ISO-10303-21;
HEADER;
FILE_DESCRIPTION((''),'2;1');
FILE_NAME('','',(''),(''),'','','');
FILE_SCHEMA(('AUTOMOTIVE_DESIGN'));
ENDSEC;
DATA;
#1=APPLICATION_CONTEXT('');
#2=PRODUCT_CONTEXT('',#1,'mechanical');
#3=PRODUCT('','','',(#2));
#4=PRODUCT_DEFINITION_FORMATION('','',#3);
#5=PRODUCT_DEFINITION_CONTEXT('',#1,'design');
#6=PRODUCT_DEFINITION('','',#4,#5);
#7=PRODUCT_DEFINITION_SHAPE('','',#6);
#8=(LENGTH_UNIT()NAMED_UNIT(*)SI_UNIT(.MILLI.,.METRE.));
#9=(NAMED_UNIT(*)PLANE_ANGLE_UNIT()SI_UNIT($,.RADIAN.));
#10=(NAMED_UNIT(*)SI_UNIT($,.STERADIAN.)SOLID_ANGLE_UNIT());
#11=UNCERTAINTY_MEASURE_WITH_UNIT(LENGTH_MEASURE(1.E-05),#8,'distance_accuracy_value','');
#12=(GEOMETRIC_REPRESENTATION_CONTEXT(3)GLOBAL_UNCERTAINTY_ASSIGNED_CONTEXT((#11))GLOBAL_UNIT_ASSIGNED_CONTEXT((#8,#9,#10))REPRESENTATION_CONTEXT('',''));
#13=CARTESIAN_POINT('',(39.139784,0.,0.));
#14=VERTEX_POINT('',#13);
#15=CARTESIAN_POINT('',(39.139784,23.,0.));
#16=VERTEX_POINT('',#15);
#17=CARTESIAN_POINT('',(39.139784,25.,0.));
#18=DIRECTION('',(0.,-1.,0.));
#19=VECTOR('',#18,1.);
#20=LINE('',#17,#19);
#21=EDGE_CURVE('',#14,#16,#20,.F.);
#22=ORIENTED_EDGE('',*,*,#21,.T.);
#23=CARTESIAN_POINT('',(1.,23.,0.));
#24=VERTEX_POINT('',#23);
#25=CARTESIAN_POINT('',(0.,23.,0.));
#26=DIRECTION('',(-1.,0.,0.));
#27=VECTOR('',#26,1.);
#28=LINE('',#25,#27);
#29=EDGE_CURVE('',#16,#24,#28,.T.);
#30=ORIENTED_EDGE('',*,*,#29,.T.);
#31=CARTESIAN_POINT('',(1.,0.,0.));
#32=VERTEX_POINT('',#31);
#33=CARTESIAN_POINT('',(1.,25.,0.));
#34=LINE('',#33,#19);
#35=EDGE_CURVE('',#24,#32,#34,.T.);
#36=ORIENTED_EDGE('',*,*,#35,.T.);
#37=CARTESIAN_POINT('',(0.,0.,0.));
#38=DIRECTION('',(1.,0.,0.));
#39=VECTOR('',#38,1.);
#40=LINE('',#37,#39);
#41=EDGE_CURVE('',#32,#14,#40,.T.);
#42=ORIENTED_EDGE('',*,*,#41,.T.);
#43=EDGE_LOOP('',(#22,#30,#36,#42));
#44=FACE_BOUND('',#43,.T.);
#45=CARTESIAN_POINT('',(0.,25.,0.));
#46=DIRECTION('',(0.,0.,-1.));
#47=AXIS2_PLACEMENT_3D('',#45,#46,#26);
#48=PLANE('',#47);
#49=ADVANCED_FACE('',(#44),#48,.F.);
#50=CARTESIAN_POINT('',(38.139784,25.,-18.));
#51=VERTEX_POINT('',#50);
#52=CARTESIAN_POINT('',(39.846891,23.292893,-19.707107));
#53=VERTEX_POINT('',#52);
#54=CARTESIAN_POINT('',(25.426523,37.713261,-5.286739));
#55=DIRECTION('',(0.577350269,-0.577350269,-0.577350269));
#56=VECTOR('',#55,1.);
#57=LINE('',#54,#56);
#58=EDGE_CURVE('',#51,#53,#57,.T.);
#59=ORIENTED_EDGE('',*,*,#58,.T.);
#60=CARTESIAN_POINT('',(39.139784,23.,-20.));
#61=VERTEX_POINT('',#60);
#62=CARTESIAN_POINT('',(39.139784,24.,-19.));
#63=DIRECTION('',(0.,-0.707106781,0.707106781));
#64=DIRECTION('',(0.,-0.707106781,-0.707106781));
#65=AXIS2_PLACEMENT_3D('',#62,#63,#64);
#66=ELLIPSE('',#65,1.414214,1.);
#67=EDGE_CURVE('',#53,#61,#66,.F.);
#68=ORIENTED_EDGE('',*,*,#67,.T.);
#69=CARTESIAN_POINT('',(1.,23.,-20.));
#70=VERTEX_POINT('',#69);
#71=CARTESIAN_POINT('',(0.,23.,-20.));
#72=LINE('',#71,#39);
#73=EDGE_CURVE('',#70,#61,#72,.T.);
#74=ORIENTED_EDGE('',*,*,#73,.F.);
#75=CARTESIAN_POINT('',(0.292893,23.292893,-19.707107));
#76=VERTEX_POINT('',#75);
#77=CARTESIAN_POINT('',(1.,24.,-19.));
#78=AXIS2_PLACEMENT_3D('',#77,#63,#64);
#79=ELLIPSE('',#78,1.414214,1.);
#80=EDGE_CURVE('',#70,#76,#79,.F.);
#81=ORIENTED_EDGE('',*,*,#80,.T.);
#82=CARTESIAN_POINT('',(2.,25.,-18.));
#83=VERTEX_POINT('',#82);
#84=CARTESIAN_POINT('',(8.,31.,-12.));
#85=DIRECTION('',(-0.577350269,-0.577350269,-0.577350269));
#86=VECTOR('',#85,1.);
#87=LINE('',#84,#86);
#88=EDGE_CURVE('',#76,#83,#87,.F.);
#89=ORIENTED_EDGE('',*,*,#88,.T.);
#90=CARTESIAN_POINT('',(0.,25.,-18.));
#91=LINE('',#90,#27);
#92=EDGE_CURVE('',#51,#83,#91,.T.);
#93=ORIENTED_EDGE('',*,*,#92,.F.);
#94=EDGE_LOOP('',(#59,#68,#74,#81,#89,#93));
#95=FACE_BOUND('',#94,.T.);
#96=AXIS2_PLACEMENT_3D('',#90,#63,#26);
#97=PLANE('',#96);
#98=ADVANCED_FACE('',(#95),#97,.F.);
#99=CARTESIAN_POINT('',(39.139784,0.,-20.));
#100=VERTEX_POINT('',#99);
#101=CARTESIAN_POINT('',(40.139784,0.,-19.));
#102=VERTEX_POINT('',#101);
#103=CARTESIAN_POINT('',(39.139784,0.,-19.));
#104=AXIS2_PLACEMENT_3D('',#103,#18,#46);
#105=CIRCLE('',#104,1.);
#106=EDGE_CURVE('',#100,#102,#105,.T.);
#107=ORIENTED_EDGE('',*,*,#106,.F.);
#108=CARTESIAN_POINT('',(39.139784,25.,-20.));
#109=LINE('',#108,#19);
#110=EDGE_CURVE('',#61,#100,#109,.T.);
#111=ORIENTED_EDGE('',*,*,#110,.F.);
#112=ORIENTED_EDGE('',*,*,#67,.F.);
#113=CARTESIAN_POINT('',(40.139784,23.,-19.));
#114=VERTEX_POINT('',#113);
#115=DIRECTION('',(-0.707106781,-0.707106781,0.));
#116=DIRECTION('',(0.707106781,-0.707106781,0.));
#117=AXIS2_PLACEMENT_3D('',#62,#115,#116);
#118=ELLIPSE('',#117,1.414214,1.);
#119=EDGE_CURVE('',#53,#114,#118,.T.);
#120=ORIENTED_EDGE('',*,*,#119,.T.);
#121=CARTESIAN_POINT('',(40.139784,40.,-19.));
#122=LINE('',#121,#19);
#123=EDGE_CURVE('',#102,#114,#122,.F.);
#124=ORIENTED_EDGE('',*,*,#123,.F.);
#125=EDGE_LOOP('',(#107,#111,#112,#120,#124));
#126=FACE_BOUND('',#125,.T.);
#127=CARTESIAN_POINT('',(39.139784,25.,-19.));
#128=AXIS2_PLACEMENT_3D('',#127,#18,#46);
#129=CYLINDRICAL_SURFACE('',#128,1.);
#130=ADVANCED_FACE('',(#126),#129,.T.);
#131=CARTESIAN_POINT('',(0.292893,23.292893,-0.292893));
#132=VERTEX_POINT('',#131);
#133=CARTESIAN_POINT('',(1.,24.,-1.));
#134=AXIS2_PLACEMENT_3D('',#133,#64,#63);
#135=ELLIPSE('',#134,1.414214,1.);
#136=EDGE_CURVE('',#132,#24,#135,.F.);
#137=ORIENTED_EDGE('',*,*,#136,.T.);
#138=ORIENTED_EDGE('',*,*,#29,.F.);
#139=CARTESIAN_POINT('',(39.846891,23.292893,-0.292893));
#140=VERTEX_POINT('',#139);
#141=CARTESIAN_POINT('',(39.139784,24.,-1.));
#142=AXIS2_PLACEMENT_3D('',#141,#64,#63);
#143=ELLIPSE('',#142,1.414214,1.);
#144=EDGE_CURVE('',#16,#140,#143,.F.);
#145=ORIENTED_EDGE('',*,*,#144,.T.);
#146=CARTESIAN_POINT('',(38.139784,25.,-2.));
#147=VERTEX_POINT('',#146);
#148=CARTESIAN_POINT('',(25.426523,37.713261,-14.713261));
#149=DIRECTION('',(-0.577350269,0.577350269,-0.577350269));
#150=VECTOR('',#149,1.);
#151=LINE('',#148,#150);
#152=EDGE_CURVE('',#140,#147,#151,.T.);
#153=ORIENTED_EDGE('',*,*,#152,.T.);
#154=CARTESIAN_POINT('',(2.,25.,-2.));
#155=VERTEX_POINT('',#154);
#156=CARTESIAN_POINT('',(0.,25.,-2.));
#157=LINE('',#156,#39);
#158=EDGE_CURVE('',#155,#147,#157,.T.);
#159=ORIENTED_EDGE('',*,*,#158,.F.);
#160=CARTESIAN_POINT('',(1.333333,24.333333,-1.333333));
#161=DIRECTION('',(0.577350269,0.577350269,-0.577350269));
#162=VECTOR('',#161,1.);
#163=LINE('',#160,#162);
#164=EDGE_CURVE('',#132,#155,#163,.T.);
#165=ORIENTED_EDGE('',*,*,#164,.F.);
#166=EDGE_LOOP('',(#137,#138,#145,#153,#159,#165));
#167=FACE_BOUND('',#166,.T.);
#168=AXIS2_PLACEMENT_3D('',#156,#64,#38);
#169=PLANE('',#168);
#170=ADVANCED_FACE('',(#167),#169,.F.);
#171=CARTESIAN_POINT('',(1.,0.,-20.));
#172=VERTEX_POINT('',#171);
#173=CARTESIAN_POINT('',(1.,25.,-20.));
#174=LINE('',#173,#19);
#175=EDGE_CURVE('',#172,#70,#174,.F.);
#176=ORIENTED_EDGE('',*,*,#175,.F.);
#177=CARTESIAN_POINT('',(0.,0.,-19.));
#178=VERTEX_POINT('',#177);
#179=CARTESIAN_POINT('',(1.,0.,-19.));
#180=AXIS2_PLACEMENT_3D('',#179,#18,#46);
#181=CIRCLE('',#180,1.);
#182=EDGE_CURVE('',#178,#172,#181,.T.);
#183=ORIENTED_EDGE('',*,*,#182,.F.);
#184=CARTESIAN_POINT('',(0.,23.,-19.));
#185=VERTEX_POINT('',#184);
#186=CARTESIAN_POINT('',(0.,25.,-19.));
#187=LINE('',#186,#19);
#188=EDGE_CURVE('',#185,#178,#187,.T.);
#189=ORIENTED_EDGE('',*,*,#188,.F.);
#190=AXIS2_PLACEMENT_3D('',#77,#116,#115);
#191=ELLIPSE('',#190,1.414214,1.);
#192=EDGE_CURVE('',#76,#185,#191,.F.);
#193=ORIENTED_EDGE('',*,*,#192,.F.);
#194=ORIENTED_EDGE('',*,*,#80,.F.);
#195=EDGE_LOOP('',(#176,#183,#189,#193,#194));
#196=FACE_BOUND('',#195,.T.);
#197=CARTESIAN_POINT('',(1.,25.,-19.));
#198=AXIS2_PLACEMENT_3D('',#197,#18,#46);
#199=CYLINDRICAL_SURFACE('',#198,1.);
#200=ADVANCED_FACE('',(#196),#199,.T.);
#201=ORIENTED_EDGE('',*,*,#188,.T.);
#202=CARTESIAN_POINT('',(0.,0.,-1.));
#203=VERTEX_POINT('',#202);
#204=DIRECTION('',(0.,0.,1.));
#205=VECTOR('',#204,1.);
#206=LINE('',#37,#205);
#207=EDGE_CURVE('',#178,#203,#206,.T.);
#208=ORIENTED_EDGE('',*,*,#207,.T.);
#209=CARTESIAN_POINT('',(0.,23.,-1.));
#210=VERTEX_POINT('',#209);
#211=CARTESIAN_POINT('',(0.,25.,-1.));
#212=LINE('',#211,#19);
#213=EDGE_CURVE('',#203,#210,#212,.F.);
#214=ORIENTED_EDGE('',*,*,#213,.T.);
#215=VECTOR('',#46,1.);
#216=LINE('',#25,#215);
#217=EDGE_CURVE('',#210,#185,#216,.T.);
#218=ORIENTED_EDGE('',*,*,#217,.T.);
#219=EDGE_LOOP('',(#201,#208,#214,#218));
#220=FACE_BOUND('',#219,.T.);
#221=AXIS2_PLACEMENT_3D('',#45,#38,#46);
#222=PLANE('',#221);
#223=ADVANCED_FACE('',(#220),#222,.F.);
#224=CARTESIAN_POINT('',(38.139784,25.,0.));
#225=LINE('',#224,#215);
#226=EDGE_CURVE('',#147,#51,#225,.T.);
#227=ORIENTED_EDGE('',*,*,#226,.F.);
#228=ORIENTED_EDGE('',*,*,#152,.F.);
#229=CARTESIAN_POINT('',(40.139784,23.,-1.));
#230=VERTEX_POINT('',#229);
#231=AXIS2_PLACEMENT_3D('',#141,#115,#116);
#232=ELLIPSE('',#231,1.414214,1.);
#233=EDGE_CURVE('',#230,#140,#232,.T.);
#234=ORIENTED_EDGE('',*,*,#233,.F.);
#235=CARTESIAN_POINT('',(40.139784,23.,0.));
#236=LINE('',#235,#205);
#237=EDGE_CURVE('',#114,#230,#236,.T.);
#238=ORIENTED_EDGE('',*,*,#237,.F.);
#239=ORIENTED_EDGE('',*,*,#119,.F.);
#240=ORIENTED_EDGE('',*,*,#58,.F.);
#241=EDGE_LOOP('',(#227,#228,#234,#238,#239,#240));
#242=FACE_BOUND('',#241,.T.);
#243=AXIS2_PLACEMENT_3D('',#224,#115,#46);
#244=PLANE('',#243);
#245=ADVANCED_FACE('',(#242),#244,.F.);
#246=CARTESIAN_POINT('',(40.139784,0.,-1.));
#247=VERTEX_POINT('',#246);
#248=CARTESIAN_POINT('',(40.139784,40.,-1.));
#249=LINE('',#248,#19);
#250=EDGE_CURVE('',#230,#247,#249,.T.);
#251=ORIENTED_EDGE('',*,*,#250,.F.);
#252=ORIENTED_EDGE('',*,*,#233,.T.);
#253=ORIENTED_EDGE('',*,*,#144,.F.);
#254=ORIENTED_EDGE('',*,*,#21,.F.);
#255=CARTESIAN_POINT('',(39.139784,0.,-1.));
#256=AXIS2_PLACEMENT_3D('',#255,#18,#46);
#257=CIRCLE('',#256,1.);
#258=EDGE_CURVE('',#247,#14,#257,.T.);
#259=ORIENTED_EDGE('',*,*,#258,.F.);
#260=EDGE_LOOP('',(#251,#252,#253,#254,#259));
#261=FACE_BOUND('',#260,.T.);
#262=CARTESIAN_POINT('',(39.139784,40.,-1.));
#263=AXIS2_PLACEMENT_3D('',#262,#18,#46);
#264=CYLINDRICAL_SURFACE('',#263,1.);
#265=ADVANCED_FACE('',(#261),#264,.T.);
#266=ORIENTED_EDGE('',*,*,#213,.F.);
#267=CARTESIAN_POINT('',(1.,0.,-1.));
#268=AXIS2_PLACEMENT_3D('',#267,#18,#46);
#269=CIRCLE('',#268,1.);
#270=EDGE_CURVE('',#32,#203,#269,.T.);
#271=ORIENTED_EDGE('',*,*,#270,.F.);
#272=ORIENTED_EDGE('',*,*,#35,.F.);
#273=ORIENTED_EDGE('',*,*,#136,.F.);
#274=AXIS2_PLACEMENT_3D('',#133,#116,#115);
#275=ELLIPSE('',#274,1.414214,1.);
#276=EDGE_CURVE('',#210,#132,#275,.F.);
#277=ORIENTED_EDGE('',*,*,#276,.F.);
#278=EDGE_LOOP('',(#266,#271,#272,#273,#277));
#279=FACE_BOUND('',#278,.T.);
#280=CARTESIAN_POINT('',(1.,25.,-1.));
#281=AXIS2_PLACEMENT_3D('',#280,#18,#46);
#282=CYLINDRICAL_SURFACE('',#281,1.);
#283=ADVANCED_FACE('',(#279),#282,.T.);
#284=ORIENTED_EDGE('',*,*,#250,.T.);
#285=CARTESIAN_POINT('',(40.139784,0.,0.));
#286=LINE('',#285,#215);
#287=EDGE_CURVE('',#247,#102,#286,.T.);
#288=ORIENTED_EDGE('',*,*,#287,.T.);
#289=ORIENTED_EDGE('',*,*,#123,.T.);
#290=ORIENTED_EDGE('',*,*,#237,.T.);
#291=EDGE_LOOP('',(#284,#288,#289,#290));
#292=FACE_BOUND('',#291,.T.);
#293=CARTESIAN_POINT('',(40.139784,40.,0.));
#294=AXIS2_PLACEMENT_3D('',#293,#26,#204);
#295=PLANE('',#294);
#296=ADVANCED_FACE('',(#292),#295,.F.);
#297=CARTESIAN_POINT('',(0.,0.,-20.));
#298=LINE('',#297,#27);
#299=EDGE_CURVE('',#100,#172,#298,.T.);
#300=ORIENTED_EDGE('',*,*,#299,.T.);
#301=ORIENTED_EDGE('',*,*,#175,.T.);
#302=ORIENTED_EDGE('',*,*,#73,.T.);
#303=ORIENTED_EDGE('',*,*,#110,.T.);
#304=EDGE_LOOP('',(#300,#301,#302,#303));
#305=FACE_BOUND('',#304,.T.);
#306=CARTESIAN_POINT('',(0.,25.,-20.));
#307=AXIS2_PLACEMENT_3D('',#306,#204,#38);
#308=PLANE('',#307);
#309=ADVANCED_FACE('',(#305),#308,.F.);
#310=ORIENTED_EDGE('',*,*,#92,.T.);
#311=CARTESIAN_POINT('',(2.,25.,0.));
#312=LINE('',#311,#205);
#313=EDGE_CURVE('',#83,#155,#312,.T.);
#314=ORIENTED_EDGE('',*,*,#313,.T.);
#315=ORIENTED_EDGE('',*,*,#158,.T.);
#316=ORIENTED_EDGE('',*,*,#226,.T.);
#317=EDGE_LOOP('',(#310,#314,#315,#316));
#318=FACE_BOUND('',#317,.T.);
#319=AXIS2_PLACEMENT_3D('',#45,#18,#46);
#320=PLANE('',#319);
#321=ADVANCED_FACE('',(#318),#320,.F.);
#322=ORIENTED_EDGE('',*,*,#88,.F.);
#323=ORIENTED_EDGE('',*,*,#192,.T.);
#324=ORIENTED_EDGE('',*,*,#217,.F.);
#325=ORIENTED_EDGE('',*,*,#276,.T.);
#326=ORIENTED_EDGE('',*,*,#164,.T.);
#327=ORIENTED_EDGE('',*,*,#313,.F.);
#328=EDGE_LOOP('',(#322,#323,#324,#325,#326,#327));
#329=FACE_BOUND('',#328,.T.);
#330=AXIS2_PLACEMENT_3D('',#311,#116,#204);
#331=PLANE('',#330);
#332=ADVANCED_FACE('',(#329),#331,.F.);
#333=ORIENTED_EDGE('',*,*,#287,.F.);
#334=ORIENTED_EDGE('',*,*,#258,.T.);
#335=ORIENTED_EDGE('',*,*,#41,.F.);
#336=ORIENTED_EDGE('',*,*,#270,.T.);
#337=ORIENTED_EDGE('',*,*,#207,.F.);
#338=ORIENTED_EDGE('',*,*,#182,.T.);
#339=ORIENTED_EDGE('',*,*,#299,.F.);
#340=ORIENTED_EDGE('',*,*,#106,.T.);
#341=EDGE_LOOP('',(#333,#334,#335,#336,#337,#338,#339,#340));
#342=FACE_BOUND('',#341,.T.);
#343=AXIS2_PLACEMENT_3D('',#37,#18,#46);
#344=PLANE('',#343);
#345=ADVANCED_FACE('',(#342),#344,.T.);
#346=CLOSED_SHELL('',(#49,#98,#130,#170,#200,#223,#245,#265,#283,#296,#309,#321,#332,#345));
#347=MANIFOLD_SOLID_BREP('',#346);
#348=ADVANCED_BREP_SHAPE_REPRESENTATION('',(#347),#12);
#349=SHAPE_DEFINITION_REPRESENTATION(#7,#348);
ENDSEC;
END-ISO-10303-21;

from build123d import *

# Parameters (mm, degrees)
SKETCH1_W           = 52
SKETCH1_H           = 20
BOSS_EXTRUDE1_DEPTH = 25
CHAMFER1_SIZE       = 2
FILLET1_R           = 1
SKETCH2_W           = 11.974527316
SKETCH2_H           = 20.695057274
CUT_EXTRUDE1_DEPTH  = 40
FILLET2_R           = 1
CHAMFER5_SIZE       = 2


with BuildPart() as part:
    # Sketch1 → Boss-Extrude1 (new body)
    with BuildSketch(Plane(origin=(0, 0, 0), x_dir=(1, 0, 0), z_dir=(0, 1, 0))):
        with Locations((26, 10)):
            Rectangle(SKETCH1_W, SKETCH1_H)
    extrude(amount=BOSS_EXTRUDE1_DEPTH)

    # Chamfer1
    chamfer1_edges = [part.edges().sort_by_distance(p)[0] for p in [
        (52, 25, -10),
        (26, 25, -20),
        (0, 25, -10),
        (26, 25, 0),
    ]]
    chamfer(chamfer1_edges, length=CHAMFER1_SIZE)

    # Fillet1
    fillet1_edges = [part.edges().sort_by_distance(p)[0] for p in [
        (0, 11.5, -20),
        (52, 11.5, -20),
        (52, 11.5, 0),
        (0, 11.5, 0),
    ]]
    fillet(fillet1_edges, radius=FILLET1_R)

    # Sketch2 → Cut-Extrude1 (cut)
    with BuildSketch(Plane.XZ):
        with Locations((46.127047968, -10.347528637)):
            Rectangle(SKETCH2_W, SKETCH2_H)
    extrude(amount=-CUT_EXTRUDE1_DEPTH, mode=Mode.SUBTRACT)

    # Fillet2
    fillet2_edges = [part.edges().sort_by_distance(p)[0] for p in [
        (40.13978431, 11.5, -20),
        (40.13978431, 11.5, 0),
    ]]
    fillet(fillet2_edges, radius=FILLET2_R)

    # Chamfer5
    # the kernel refuses this chamfer: 2 mm, written as the material it takes off along each edge
    with BuildSketch(Plane(origin=(40.13978431, 25, 3.143365976), x_dir=(0.027495876610585647, -0.9996219169112968, 0), z_dir=(0, 0, -1))) as chamfer5_piece_1:
        Polygon((CHAMFER5_SIZE * 0.999621916911, CHAMFER5_SIZE * 0.0274958766106), (-CHAMFER5_SIZE * 0.0274958766106, CHAMFER5_SIZE * 0.999621916911), (0, 0), align=None)
    extrude(amount=26.286731952, mode=Mode.SUBTRACT)


solid = part.part
